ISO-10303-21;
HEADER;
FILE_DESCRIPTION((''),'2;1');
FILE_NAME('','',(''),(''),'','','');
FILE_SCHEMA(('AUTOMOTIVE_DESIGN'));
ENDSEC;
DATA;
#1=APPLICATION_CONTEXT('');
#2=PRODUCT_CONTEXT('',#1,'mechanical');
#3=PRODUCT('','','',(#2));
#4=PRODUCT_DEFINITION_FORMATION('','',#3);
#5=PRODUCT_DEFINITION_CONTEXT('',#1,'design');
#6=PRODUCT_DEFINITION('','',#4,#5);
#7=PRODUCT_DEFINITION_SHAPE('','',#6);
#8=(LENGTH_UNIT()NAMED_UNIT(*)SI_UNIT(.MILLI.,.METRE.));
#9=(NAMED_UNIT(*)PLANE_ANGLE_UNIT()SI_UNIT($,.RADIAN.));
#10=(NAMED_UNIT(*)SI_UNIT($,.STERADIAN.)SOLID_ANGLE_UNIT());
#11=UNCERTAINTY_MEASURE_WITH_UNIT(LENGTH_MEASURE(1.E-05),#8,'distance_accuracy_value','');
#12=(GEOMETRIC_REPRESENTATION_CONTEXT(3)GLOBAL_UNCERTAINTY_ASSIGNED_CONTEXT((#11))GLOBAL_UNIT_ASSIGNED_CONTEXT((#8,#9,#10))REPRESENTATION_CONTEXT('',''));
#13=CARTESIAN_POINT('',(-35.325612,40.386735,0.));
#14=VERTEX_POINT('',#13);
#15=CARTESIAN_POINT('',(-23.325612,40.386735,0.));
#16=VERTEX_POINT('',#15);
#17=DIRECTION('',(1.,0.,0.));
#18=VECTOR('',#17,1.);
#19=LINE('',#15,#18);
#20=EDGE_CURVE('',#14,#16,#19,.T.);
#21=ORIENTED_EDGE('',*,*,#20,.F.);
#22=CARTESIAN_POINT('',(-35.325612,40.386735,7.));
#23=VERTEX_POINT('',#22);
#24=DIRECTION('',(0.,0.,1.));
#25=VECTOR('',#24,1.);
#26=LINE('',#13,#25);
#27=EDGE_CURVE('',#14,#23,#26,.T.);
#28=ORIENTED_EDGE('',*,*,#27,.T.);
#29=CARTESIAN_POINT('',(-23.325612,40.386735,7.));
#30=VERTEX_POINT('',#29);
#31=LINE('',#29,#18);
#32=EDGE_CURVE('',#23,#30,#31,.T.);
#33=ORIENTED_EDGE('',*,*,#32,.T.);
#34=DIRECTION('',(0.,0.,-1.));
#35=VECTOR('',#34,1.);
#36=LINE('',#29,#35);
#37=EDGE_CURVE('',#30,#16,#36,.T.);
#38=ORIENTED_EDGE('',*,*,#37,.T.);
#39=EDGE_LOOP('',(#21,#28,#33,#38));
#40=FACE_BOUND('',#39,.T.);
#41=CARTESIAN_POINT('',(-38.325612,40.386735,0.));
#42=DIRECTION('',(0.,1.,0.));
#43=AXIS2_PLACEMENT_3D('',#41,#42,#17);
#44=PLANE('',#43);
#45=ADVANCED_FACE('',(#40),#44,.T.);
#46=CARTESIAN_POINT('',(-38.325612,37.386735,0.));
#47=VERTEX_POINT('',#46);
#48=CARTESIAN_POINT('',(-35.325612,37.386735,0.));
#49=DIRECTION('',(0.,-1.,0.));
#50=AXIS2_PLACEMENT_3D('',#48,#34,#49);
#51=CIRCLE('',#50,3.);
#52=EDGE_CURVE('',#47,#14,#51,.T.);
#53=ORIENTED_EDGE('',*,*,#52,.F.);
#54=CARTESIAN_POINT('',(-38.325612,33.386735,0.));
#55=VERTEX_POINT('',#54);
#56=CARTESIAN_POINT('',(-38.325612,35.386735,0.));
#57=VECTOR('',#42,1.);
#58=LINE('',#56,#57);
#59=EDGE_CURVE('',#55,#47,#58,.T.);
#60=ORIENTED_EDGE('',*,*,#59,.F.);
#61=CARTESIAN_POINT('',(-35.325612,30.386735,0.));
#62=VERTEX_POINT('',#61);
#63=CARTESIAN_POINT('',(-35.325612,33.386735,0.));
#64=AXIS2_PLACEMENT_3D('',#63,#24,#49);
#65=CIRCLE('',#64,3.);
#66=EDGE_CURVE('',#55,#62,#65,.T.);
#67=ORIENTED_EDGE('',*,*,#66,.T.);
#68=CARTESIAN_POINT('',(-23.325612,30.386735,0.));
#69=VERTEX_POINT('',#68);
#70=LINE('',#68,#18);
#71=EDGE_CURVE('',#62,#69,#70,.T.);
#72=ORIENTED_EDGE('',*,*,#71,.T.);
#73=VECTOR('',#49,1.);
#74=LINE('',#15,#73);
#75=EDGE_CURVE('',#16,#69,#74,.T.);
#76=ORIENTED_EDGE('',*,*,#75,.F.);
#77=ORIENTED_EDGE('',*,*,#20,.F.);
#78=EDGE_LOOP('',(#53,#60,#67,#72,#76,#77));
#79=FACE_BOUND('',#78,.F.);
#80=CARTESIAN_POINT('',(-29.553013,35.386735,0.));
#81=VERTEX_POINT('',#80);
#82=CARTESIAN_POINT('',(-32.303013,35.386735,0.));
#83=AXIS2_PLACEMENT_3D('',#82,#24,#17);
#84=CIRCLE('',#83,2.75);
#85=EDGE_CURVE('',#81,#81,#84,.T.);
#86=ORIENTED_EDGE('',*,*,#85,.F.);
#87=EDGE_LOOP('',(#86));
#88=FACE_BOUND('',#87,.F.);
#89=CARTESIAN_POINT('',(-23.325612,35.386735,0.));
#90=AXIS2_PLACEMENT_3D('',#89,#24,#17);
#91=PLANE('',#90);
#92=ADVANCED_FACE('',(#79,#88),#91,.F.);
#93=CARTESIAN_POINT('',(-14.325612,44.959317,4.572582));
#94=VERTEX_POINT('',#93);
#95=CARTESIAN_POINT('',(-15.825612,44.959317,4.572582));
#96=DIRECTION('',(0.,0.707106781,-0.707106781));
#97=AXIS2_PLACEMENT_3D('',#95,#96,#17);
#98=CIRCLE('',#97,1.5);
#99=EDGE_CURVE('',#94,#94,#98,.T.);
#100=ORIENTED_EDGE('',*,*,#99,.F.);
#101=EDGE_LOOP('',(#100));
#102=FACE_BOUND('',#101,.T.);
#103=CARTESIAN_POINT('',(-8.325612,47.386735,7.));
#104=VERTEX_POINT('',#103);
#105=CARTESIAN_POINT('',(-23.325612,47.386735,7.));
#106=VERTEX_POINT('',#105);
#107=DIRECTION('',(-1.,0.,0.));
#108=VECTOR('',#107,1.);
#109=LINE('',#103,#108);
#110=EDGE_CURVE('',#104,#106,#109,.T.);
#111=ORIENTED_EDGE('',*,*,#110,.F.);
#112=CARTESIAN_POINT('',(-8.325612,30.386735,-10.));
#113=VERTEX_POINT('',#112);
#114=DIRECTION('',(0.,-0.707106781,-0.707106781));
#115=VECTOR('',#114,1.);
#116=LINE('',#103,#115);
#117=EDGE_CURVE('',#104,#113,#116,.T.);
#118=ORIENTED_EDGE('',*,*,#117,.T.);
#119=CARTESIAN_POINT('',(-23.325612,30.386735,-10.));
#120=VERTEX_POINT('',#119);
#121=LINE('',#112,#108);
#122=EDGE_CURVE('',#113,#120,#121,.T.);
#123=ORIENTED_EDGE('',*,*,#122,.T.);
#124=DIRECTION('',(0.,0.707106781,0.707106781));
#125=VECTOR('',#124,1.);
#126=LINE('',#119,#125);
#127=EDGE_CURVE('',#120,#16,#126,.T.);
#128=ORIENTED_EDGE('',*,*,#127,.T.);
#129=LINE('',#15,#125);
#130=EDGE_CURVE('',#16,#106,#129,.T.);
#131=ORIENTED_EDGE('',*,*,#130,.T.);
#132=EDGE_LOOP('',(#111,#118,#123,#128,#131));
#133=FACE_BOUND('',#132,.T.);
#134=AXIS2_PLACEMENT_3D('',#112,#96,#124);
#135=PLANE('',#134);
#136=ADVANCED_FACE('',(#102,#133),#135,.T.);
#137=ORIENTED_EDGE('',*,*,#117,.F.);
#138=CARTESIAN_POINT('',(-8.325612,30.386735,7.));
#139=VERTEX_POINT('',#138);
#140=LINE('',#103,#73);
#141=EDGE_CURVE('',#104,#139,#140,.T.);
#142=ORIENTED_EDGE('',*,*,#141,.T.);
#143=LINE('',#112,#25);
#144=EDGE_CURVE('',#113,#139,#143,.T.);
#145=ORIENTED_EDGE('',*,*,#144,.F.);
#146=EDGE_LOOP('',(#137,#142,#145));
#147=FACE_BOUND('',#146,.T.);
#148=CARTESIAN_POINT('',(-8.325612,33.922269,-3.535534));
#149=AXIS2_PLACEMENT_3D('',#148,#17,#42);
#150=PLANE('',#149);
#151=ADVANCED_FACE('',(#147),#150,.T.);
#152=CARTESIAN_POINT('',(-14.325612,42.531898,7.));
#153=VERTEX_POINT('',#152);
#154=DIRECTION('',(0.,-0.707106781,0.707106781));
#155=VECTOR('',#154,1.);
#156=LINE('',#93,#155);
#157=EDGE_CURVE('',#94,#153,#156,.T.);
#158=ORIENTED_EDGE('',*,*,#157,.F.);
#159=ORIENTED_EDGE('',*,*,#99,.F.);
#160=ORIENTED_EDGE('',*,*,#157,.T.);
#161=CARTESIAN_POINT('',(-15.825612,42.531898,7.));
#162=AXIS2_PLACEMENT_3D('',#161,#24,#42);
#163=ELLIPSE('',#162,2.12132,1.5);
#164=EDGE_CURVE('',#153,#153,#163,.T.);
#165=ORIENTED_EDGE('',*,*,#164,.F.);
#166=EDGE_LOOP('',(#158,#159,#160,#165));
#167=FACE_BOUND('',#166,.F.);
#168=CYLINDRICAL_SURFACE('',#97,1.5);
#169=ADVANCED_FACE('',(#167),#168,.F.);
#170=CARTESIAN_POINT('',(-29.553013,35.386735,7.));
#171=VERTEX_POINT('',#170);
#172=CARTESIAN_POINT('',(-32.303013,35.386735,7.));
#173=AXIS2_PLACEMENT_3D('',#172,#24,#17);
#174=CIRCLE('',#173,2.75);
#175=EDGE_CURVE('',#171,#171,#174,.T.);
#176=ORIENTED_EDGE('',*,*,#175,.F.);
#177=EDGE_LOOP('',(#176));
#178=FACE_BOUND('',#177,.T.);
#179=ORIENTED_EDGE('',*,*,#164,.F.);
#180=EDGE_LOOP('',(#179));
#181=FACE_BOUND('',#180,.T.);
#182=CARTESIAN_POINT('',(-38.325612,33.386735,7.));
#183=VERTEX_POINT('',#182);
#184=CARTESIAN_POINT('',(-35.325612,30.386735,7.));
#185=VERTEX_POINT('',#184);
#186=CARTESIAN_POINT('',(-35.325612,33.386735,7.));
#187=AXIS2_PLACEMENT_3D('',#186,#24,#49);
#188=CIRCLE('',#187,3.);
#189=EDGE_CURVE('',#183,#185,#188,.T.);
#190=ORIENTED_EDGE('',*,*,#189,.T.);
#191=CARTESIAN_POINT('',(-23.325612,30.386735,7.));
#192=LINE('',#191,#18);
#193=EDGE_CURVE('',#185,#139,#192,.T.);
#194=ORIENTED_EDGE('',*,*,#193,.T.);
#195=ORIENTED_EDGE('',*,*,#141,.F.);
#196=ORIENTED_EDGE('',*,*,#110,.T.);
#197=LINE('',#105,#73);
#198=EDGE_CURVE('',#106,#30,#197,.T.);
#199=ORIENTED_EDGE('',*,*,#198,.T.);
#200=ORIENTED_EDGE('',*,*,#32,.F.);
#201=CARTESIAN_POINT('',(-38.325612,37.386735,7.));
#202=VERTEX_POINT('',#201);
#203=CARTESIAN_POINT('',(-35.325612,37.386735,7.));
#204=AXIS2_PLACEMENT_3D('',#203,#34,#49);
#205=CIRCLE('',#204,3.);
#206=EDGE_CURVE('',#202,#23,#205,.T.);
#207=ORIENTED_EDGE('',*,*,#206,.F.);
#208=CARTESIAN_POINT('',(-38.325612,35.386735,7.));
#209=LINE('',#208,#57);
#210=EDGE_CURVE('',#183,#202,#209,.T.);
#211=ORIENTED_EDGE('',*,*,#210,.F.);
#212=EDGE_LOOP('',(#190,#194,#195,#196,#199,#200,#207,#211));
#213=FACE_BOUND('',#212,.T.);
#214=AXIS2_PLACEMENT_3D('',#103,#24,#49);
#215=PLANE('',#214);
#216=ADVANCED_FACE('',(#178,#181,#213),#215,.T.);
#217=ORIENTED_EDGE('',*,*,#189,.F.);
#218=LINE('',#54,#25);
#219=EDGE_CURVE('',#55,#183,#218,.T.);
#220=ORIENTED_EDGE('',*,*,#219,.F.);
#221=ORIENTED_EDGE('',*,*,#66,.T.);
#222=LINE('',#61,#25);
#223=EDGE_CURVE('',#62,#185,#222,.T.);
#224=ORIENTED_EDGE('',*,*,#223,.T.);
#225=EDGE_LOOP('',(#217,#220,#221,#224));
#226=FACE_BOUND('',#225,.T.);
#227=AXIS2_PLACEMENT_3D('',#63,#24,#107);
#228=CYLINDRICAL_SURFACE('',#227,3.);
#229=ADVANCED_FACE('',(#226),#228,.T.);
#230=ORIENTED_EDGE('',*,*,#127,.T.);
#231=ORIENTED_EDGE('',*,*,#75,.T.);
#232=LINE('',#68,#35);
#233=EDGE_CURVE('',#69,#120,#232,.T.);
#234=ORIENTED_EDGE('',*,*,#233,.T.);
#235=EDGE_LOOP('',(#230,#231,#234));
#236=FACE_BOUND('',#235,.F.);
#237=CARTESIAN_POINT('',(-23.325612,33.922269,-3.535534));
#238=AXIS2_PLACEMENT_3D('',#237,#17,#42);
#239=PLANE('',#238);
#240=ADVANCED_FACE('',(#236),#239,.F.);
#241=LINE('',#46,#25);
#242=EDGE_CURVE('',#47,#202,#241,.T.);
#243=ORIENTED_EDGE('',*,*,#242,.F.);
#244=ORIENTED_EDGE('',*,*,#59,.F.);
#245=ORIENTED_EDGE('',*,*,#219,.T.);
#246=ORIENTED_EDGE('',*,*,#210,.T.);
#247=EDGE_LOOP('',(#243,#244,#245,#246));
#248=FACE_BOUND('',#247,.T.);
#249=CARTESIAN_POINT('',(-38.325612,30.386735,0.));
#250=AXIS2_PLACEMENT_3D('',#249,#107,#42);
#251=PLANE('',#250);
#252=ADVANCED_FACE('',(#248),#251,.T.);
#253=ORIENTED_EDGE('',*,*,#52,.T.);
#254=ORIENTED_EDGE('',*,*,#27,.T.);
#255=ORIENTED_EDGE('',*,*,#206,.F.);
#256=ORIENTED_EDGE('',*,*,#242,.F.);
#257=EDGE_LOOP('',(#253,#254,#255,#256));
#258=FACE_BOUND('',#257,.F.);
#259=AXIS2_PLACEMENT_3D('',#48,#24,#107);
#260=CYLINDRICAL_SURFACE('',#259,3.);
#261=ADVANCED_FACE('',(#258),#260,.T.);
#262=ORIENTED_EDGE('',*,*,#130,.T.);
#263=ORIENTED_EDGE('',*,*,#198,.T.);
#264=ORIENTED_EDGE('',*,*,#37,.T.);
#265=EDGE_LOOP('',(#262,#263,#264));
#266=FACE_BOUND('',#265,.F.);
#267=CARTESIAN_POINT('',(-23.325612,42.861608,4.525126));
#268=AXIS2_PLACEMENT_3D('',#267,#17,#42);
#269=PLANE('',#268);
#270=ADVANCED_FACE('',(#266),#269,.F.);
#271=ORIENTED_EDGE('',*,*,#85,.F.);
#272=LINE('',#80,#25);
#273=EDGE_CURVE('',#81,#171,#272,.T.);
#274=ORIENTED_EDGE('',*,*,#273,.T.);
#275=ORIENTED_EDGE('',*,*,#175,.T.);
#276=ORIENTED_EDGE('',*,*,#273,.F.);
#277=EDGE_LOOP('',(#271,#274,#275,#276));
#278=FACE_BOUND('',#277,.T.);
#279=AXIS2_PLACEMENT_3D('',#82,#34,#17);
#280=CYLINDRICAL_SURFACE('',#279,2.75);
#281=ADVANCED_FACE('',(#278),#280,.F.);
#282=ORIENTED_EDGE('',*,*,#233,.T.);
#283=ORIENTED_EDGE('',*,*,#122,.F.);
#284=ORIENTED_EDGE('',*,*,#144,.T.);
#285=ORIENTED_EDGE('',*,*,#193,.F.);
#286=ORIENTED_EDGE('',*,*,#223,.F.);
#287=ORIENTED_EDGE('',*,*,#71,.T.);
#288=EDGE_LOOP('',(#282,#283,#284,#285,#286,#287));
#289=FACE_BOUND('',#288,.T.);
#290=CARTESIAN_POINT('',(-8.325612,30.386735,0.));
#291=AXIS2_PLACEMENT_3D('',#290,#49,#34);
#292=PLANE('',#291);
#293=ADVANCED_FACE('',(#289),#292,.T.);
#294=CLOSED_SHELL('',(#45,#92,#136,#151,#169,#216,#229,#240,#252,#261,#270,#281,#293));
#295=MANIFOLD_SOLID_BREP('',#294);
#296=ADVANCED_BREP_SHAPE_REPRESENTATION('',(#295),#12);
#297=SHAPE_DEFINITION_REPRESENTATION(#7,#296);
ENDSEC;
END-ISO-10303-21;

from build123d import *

# Parameters (mm, degrees)
F0_W     = 30
F0_H     = 10
F0_R     = 2.75
F1_DEPTH = 7
F3_DEPTH = 15
F4_R     = 3
F5_R     = 1.5
F6_DEPTH = 25


# Not quite as in the source:
# - a feature names something its author has since deleted; it is built from what else it names


with BuildPart() as f1:
    # F0 (on Top) → F1 (new body)
    with BuildSketch(Plane.XY):
        with Locations((-23.3256115019, 35.3867347538)):
            Rectangle(F0_W, F0_H)
        with Locations((-32.3030129075, 35.3867347538)):
            Circle(F0_R, mode=Mode.SUBTRACT)
    extrude(amount=F1_DEPTH)

    # F2 (on face) → F3 (join)
    with BuildSketch(Plane.YZ.offset(-8.3256115019)):
        Polygon((30.3867347538, -10), (40.3867347538, 0), (30.3867347538, 0), align=None)
        Polygon((40.3867347538, 7), (40.3867347538, 0), (47.3867347538, 7), align=None)
    extrude(amount=-F3_DEPTH)

    # F4
    f4_edges = [f1.edges().sort_by_distance(p)[0] for p in [
        (-38.325612, 40.386735, 3.5),
        (-38.325612, 30.386735, 3.5),
    ]]
    fillet(f4_edges, radius=F4_R)

    # F5 (on face) → F6 (cut)
    with BuildSketch(Plane(origin=(0, 20.1933673769, -20.1933673769), x_dir=(1, 0, 0), z_dir=(0, 0.7071067812, -0.7071067812))):
        with Locations((-15.8256115019, -35.0243411958)):
            Circle(F5_R)
    extrude(amount=-F6_DEPTH, mode=Mode.SUBTRACT)


solid = f1.part
